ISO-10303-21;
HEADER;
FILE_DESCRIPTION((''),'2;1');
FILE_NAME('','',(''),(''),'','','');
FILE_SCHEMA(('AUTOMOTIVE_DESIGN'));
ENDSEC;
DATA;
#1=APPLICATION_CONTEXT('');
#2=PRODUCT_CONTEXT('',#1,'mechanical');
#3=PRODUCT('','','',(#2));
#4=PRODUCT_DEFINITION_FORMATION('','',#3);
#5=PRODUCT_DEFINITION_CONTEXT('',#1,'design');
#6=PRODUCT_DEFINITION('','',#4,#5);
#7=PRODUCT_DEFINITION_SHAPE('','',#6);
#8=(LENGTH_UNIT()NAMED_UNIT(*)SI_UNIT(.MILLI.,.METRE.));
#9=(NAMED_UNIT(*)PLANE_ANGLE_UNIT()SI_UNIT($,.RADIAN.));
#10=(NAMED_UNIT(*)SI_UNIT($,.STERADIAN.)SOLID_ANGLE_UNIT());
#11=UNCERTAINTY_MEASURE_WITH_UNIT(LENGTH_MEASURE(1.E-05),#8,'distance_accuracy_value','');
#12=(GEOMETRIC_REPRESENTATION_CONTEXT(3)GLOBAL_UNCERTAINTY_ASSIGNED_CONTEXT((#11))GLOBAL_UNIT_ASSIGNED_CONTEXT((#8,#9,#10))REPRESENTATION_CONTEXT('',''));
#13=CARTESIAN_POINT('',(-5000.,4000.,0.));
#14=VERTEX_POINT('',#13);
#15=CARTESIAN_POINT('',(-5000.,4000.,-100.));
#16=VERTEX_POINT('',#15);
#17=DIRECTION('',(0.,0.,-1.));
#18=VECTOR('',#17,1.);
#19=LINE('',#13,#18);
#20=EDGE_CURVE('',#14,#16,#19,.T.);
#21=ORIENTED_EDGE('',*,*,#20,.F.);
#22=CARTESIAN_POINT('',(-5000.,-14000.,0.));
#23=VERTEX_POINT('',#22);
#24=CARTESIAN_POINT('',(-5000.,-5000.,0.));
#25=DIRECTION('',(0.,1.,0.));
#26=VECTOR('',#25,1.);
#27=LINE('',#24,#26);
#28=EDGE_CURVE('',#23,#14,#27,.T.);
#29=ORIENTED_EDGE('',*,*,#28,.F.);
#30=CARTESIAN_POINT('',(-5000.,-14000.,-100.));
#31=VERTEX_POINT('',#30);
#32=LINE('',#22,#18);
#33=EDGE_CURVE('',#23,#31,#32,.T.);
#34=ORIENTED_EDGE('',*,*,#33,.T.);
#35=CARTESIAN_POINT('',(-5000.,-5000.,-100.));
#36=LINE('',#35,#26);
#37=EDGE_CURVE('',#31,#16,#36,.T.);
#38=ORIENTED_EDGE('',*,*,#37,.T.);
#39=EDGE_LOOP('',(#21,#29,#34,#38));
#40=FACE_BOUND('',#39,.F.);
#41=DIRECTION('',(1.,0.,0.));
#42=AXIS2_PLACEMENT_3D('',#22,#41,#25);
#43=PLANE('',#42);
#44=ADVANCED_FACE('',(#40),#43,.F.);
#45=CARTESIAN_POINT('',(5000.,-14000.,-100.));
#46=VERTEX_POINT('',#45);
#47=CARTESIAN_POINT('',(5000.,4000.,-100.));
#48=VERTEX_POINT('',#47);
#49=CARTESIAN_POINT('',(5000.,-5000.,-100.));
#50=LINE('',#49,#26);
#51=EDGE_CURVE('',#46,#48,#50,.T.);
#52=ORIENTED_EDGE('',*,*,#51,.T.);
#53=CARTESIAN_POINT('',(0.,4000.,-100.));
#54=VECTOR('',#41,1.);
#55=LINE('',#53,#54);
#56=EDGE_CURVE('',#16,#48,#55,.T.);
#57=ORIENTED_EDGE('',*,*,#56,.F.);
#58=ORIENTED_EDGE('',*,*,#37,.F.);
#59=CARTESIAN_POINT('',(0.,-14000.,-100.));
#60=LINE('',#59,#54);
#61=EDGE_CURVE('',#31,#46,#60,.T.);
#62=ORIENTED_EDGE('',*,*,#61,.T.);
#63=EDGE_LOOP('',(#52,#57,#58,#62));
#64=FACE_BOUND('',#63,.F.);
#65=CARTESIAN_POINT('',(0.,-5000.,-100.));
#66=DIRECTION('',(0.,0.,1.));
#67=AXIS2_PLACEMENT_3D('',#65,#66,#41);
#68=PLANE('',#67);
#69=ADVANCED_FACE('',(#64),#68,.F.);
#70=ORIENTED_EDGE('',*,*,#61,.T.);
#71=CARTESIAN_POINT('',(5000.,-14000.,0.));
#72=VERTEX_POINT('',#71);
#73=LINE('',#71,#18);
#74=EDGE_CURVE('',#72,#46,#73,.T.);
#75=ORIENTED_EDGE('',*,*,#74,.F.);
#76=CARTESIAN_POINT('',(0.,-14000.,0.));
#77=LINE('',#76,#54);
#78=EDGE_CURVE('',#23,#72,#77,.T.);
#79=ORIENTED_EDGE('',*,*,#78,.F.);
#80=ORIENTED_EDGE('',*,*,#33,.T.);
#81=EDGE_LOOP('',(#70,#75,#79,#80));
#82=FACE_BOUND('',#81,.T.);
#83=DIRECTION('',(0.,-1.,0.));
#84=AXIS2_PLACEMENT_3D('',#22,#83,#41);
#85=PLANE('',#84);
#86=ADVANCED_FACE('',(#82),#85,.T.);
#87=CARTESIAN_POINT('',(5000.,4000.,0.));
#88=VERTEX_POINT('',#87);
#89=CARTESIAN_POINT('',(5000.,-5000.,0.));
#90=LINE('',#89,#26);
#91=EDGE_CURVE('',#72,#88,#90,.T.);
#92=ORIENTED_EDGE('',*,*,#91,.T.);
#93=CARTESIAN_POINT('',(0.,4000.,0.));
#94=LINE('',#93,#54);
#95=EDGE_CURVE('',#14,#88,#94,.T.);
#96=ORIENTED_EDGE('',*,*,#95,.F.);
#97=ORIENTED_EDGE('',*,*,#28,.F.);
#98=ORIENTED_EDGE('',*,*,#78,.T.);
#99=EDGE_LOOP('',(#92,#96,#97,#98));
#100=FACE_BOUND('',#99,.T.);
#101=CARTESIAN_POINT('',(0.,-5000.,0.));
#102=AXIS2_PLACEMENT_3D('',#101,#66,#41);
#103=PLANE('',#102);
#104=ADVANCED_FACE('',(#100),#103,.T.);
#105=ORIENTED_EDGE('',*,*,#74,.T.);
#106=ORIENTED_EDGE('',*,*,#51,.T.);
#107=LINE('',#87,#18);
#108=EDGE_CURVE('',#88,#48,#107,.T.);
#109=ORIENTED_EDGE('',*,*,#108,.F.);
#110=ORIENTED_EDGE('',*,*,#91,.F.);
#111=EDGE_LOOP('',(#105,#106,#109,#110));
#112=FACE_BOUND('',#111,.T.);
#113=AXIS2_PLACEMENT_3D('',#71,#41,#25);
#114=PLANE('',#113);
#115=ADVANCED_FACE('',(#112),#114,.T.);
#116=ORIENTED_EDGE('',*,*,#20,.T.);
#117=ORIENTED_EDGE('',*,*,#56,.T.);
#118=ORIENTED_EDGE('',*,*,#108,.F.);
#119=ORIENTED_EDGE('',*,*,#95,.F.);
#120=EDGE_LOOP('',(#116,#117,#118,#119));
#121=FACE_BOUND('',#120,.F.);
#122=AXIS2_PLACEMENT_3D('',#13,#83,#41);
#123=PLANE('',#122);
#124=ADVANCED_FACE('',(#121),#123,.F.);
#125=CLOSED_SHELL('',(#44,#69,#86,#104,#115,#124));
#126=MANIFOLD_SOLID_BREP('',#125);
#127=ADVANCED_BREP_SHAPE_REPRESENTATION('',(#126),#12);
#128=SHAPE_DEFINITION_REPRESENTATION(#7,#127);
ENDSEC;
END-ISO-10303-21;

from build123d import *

# Parameters (mm, degrees)
F0_W     = 10000
F0_H     = 18000
F1_DEPTH = 100


# Not quite as in the source:
# - a feature names something its author has since deleted; it is built from what else it names


with BuildPart() as f1:
    # F0 (on Top) → F1 (new body)
    with BuildSketch(Plane.XY):
        with Locations((0, -5000)):
            Rectangle(F0_W, F0_H)
    extrude(amount=-F1_DEPTH)


solid = f1.part
